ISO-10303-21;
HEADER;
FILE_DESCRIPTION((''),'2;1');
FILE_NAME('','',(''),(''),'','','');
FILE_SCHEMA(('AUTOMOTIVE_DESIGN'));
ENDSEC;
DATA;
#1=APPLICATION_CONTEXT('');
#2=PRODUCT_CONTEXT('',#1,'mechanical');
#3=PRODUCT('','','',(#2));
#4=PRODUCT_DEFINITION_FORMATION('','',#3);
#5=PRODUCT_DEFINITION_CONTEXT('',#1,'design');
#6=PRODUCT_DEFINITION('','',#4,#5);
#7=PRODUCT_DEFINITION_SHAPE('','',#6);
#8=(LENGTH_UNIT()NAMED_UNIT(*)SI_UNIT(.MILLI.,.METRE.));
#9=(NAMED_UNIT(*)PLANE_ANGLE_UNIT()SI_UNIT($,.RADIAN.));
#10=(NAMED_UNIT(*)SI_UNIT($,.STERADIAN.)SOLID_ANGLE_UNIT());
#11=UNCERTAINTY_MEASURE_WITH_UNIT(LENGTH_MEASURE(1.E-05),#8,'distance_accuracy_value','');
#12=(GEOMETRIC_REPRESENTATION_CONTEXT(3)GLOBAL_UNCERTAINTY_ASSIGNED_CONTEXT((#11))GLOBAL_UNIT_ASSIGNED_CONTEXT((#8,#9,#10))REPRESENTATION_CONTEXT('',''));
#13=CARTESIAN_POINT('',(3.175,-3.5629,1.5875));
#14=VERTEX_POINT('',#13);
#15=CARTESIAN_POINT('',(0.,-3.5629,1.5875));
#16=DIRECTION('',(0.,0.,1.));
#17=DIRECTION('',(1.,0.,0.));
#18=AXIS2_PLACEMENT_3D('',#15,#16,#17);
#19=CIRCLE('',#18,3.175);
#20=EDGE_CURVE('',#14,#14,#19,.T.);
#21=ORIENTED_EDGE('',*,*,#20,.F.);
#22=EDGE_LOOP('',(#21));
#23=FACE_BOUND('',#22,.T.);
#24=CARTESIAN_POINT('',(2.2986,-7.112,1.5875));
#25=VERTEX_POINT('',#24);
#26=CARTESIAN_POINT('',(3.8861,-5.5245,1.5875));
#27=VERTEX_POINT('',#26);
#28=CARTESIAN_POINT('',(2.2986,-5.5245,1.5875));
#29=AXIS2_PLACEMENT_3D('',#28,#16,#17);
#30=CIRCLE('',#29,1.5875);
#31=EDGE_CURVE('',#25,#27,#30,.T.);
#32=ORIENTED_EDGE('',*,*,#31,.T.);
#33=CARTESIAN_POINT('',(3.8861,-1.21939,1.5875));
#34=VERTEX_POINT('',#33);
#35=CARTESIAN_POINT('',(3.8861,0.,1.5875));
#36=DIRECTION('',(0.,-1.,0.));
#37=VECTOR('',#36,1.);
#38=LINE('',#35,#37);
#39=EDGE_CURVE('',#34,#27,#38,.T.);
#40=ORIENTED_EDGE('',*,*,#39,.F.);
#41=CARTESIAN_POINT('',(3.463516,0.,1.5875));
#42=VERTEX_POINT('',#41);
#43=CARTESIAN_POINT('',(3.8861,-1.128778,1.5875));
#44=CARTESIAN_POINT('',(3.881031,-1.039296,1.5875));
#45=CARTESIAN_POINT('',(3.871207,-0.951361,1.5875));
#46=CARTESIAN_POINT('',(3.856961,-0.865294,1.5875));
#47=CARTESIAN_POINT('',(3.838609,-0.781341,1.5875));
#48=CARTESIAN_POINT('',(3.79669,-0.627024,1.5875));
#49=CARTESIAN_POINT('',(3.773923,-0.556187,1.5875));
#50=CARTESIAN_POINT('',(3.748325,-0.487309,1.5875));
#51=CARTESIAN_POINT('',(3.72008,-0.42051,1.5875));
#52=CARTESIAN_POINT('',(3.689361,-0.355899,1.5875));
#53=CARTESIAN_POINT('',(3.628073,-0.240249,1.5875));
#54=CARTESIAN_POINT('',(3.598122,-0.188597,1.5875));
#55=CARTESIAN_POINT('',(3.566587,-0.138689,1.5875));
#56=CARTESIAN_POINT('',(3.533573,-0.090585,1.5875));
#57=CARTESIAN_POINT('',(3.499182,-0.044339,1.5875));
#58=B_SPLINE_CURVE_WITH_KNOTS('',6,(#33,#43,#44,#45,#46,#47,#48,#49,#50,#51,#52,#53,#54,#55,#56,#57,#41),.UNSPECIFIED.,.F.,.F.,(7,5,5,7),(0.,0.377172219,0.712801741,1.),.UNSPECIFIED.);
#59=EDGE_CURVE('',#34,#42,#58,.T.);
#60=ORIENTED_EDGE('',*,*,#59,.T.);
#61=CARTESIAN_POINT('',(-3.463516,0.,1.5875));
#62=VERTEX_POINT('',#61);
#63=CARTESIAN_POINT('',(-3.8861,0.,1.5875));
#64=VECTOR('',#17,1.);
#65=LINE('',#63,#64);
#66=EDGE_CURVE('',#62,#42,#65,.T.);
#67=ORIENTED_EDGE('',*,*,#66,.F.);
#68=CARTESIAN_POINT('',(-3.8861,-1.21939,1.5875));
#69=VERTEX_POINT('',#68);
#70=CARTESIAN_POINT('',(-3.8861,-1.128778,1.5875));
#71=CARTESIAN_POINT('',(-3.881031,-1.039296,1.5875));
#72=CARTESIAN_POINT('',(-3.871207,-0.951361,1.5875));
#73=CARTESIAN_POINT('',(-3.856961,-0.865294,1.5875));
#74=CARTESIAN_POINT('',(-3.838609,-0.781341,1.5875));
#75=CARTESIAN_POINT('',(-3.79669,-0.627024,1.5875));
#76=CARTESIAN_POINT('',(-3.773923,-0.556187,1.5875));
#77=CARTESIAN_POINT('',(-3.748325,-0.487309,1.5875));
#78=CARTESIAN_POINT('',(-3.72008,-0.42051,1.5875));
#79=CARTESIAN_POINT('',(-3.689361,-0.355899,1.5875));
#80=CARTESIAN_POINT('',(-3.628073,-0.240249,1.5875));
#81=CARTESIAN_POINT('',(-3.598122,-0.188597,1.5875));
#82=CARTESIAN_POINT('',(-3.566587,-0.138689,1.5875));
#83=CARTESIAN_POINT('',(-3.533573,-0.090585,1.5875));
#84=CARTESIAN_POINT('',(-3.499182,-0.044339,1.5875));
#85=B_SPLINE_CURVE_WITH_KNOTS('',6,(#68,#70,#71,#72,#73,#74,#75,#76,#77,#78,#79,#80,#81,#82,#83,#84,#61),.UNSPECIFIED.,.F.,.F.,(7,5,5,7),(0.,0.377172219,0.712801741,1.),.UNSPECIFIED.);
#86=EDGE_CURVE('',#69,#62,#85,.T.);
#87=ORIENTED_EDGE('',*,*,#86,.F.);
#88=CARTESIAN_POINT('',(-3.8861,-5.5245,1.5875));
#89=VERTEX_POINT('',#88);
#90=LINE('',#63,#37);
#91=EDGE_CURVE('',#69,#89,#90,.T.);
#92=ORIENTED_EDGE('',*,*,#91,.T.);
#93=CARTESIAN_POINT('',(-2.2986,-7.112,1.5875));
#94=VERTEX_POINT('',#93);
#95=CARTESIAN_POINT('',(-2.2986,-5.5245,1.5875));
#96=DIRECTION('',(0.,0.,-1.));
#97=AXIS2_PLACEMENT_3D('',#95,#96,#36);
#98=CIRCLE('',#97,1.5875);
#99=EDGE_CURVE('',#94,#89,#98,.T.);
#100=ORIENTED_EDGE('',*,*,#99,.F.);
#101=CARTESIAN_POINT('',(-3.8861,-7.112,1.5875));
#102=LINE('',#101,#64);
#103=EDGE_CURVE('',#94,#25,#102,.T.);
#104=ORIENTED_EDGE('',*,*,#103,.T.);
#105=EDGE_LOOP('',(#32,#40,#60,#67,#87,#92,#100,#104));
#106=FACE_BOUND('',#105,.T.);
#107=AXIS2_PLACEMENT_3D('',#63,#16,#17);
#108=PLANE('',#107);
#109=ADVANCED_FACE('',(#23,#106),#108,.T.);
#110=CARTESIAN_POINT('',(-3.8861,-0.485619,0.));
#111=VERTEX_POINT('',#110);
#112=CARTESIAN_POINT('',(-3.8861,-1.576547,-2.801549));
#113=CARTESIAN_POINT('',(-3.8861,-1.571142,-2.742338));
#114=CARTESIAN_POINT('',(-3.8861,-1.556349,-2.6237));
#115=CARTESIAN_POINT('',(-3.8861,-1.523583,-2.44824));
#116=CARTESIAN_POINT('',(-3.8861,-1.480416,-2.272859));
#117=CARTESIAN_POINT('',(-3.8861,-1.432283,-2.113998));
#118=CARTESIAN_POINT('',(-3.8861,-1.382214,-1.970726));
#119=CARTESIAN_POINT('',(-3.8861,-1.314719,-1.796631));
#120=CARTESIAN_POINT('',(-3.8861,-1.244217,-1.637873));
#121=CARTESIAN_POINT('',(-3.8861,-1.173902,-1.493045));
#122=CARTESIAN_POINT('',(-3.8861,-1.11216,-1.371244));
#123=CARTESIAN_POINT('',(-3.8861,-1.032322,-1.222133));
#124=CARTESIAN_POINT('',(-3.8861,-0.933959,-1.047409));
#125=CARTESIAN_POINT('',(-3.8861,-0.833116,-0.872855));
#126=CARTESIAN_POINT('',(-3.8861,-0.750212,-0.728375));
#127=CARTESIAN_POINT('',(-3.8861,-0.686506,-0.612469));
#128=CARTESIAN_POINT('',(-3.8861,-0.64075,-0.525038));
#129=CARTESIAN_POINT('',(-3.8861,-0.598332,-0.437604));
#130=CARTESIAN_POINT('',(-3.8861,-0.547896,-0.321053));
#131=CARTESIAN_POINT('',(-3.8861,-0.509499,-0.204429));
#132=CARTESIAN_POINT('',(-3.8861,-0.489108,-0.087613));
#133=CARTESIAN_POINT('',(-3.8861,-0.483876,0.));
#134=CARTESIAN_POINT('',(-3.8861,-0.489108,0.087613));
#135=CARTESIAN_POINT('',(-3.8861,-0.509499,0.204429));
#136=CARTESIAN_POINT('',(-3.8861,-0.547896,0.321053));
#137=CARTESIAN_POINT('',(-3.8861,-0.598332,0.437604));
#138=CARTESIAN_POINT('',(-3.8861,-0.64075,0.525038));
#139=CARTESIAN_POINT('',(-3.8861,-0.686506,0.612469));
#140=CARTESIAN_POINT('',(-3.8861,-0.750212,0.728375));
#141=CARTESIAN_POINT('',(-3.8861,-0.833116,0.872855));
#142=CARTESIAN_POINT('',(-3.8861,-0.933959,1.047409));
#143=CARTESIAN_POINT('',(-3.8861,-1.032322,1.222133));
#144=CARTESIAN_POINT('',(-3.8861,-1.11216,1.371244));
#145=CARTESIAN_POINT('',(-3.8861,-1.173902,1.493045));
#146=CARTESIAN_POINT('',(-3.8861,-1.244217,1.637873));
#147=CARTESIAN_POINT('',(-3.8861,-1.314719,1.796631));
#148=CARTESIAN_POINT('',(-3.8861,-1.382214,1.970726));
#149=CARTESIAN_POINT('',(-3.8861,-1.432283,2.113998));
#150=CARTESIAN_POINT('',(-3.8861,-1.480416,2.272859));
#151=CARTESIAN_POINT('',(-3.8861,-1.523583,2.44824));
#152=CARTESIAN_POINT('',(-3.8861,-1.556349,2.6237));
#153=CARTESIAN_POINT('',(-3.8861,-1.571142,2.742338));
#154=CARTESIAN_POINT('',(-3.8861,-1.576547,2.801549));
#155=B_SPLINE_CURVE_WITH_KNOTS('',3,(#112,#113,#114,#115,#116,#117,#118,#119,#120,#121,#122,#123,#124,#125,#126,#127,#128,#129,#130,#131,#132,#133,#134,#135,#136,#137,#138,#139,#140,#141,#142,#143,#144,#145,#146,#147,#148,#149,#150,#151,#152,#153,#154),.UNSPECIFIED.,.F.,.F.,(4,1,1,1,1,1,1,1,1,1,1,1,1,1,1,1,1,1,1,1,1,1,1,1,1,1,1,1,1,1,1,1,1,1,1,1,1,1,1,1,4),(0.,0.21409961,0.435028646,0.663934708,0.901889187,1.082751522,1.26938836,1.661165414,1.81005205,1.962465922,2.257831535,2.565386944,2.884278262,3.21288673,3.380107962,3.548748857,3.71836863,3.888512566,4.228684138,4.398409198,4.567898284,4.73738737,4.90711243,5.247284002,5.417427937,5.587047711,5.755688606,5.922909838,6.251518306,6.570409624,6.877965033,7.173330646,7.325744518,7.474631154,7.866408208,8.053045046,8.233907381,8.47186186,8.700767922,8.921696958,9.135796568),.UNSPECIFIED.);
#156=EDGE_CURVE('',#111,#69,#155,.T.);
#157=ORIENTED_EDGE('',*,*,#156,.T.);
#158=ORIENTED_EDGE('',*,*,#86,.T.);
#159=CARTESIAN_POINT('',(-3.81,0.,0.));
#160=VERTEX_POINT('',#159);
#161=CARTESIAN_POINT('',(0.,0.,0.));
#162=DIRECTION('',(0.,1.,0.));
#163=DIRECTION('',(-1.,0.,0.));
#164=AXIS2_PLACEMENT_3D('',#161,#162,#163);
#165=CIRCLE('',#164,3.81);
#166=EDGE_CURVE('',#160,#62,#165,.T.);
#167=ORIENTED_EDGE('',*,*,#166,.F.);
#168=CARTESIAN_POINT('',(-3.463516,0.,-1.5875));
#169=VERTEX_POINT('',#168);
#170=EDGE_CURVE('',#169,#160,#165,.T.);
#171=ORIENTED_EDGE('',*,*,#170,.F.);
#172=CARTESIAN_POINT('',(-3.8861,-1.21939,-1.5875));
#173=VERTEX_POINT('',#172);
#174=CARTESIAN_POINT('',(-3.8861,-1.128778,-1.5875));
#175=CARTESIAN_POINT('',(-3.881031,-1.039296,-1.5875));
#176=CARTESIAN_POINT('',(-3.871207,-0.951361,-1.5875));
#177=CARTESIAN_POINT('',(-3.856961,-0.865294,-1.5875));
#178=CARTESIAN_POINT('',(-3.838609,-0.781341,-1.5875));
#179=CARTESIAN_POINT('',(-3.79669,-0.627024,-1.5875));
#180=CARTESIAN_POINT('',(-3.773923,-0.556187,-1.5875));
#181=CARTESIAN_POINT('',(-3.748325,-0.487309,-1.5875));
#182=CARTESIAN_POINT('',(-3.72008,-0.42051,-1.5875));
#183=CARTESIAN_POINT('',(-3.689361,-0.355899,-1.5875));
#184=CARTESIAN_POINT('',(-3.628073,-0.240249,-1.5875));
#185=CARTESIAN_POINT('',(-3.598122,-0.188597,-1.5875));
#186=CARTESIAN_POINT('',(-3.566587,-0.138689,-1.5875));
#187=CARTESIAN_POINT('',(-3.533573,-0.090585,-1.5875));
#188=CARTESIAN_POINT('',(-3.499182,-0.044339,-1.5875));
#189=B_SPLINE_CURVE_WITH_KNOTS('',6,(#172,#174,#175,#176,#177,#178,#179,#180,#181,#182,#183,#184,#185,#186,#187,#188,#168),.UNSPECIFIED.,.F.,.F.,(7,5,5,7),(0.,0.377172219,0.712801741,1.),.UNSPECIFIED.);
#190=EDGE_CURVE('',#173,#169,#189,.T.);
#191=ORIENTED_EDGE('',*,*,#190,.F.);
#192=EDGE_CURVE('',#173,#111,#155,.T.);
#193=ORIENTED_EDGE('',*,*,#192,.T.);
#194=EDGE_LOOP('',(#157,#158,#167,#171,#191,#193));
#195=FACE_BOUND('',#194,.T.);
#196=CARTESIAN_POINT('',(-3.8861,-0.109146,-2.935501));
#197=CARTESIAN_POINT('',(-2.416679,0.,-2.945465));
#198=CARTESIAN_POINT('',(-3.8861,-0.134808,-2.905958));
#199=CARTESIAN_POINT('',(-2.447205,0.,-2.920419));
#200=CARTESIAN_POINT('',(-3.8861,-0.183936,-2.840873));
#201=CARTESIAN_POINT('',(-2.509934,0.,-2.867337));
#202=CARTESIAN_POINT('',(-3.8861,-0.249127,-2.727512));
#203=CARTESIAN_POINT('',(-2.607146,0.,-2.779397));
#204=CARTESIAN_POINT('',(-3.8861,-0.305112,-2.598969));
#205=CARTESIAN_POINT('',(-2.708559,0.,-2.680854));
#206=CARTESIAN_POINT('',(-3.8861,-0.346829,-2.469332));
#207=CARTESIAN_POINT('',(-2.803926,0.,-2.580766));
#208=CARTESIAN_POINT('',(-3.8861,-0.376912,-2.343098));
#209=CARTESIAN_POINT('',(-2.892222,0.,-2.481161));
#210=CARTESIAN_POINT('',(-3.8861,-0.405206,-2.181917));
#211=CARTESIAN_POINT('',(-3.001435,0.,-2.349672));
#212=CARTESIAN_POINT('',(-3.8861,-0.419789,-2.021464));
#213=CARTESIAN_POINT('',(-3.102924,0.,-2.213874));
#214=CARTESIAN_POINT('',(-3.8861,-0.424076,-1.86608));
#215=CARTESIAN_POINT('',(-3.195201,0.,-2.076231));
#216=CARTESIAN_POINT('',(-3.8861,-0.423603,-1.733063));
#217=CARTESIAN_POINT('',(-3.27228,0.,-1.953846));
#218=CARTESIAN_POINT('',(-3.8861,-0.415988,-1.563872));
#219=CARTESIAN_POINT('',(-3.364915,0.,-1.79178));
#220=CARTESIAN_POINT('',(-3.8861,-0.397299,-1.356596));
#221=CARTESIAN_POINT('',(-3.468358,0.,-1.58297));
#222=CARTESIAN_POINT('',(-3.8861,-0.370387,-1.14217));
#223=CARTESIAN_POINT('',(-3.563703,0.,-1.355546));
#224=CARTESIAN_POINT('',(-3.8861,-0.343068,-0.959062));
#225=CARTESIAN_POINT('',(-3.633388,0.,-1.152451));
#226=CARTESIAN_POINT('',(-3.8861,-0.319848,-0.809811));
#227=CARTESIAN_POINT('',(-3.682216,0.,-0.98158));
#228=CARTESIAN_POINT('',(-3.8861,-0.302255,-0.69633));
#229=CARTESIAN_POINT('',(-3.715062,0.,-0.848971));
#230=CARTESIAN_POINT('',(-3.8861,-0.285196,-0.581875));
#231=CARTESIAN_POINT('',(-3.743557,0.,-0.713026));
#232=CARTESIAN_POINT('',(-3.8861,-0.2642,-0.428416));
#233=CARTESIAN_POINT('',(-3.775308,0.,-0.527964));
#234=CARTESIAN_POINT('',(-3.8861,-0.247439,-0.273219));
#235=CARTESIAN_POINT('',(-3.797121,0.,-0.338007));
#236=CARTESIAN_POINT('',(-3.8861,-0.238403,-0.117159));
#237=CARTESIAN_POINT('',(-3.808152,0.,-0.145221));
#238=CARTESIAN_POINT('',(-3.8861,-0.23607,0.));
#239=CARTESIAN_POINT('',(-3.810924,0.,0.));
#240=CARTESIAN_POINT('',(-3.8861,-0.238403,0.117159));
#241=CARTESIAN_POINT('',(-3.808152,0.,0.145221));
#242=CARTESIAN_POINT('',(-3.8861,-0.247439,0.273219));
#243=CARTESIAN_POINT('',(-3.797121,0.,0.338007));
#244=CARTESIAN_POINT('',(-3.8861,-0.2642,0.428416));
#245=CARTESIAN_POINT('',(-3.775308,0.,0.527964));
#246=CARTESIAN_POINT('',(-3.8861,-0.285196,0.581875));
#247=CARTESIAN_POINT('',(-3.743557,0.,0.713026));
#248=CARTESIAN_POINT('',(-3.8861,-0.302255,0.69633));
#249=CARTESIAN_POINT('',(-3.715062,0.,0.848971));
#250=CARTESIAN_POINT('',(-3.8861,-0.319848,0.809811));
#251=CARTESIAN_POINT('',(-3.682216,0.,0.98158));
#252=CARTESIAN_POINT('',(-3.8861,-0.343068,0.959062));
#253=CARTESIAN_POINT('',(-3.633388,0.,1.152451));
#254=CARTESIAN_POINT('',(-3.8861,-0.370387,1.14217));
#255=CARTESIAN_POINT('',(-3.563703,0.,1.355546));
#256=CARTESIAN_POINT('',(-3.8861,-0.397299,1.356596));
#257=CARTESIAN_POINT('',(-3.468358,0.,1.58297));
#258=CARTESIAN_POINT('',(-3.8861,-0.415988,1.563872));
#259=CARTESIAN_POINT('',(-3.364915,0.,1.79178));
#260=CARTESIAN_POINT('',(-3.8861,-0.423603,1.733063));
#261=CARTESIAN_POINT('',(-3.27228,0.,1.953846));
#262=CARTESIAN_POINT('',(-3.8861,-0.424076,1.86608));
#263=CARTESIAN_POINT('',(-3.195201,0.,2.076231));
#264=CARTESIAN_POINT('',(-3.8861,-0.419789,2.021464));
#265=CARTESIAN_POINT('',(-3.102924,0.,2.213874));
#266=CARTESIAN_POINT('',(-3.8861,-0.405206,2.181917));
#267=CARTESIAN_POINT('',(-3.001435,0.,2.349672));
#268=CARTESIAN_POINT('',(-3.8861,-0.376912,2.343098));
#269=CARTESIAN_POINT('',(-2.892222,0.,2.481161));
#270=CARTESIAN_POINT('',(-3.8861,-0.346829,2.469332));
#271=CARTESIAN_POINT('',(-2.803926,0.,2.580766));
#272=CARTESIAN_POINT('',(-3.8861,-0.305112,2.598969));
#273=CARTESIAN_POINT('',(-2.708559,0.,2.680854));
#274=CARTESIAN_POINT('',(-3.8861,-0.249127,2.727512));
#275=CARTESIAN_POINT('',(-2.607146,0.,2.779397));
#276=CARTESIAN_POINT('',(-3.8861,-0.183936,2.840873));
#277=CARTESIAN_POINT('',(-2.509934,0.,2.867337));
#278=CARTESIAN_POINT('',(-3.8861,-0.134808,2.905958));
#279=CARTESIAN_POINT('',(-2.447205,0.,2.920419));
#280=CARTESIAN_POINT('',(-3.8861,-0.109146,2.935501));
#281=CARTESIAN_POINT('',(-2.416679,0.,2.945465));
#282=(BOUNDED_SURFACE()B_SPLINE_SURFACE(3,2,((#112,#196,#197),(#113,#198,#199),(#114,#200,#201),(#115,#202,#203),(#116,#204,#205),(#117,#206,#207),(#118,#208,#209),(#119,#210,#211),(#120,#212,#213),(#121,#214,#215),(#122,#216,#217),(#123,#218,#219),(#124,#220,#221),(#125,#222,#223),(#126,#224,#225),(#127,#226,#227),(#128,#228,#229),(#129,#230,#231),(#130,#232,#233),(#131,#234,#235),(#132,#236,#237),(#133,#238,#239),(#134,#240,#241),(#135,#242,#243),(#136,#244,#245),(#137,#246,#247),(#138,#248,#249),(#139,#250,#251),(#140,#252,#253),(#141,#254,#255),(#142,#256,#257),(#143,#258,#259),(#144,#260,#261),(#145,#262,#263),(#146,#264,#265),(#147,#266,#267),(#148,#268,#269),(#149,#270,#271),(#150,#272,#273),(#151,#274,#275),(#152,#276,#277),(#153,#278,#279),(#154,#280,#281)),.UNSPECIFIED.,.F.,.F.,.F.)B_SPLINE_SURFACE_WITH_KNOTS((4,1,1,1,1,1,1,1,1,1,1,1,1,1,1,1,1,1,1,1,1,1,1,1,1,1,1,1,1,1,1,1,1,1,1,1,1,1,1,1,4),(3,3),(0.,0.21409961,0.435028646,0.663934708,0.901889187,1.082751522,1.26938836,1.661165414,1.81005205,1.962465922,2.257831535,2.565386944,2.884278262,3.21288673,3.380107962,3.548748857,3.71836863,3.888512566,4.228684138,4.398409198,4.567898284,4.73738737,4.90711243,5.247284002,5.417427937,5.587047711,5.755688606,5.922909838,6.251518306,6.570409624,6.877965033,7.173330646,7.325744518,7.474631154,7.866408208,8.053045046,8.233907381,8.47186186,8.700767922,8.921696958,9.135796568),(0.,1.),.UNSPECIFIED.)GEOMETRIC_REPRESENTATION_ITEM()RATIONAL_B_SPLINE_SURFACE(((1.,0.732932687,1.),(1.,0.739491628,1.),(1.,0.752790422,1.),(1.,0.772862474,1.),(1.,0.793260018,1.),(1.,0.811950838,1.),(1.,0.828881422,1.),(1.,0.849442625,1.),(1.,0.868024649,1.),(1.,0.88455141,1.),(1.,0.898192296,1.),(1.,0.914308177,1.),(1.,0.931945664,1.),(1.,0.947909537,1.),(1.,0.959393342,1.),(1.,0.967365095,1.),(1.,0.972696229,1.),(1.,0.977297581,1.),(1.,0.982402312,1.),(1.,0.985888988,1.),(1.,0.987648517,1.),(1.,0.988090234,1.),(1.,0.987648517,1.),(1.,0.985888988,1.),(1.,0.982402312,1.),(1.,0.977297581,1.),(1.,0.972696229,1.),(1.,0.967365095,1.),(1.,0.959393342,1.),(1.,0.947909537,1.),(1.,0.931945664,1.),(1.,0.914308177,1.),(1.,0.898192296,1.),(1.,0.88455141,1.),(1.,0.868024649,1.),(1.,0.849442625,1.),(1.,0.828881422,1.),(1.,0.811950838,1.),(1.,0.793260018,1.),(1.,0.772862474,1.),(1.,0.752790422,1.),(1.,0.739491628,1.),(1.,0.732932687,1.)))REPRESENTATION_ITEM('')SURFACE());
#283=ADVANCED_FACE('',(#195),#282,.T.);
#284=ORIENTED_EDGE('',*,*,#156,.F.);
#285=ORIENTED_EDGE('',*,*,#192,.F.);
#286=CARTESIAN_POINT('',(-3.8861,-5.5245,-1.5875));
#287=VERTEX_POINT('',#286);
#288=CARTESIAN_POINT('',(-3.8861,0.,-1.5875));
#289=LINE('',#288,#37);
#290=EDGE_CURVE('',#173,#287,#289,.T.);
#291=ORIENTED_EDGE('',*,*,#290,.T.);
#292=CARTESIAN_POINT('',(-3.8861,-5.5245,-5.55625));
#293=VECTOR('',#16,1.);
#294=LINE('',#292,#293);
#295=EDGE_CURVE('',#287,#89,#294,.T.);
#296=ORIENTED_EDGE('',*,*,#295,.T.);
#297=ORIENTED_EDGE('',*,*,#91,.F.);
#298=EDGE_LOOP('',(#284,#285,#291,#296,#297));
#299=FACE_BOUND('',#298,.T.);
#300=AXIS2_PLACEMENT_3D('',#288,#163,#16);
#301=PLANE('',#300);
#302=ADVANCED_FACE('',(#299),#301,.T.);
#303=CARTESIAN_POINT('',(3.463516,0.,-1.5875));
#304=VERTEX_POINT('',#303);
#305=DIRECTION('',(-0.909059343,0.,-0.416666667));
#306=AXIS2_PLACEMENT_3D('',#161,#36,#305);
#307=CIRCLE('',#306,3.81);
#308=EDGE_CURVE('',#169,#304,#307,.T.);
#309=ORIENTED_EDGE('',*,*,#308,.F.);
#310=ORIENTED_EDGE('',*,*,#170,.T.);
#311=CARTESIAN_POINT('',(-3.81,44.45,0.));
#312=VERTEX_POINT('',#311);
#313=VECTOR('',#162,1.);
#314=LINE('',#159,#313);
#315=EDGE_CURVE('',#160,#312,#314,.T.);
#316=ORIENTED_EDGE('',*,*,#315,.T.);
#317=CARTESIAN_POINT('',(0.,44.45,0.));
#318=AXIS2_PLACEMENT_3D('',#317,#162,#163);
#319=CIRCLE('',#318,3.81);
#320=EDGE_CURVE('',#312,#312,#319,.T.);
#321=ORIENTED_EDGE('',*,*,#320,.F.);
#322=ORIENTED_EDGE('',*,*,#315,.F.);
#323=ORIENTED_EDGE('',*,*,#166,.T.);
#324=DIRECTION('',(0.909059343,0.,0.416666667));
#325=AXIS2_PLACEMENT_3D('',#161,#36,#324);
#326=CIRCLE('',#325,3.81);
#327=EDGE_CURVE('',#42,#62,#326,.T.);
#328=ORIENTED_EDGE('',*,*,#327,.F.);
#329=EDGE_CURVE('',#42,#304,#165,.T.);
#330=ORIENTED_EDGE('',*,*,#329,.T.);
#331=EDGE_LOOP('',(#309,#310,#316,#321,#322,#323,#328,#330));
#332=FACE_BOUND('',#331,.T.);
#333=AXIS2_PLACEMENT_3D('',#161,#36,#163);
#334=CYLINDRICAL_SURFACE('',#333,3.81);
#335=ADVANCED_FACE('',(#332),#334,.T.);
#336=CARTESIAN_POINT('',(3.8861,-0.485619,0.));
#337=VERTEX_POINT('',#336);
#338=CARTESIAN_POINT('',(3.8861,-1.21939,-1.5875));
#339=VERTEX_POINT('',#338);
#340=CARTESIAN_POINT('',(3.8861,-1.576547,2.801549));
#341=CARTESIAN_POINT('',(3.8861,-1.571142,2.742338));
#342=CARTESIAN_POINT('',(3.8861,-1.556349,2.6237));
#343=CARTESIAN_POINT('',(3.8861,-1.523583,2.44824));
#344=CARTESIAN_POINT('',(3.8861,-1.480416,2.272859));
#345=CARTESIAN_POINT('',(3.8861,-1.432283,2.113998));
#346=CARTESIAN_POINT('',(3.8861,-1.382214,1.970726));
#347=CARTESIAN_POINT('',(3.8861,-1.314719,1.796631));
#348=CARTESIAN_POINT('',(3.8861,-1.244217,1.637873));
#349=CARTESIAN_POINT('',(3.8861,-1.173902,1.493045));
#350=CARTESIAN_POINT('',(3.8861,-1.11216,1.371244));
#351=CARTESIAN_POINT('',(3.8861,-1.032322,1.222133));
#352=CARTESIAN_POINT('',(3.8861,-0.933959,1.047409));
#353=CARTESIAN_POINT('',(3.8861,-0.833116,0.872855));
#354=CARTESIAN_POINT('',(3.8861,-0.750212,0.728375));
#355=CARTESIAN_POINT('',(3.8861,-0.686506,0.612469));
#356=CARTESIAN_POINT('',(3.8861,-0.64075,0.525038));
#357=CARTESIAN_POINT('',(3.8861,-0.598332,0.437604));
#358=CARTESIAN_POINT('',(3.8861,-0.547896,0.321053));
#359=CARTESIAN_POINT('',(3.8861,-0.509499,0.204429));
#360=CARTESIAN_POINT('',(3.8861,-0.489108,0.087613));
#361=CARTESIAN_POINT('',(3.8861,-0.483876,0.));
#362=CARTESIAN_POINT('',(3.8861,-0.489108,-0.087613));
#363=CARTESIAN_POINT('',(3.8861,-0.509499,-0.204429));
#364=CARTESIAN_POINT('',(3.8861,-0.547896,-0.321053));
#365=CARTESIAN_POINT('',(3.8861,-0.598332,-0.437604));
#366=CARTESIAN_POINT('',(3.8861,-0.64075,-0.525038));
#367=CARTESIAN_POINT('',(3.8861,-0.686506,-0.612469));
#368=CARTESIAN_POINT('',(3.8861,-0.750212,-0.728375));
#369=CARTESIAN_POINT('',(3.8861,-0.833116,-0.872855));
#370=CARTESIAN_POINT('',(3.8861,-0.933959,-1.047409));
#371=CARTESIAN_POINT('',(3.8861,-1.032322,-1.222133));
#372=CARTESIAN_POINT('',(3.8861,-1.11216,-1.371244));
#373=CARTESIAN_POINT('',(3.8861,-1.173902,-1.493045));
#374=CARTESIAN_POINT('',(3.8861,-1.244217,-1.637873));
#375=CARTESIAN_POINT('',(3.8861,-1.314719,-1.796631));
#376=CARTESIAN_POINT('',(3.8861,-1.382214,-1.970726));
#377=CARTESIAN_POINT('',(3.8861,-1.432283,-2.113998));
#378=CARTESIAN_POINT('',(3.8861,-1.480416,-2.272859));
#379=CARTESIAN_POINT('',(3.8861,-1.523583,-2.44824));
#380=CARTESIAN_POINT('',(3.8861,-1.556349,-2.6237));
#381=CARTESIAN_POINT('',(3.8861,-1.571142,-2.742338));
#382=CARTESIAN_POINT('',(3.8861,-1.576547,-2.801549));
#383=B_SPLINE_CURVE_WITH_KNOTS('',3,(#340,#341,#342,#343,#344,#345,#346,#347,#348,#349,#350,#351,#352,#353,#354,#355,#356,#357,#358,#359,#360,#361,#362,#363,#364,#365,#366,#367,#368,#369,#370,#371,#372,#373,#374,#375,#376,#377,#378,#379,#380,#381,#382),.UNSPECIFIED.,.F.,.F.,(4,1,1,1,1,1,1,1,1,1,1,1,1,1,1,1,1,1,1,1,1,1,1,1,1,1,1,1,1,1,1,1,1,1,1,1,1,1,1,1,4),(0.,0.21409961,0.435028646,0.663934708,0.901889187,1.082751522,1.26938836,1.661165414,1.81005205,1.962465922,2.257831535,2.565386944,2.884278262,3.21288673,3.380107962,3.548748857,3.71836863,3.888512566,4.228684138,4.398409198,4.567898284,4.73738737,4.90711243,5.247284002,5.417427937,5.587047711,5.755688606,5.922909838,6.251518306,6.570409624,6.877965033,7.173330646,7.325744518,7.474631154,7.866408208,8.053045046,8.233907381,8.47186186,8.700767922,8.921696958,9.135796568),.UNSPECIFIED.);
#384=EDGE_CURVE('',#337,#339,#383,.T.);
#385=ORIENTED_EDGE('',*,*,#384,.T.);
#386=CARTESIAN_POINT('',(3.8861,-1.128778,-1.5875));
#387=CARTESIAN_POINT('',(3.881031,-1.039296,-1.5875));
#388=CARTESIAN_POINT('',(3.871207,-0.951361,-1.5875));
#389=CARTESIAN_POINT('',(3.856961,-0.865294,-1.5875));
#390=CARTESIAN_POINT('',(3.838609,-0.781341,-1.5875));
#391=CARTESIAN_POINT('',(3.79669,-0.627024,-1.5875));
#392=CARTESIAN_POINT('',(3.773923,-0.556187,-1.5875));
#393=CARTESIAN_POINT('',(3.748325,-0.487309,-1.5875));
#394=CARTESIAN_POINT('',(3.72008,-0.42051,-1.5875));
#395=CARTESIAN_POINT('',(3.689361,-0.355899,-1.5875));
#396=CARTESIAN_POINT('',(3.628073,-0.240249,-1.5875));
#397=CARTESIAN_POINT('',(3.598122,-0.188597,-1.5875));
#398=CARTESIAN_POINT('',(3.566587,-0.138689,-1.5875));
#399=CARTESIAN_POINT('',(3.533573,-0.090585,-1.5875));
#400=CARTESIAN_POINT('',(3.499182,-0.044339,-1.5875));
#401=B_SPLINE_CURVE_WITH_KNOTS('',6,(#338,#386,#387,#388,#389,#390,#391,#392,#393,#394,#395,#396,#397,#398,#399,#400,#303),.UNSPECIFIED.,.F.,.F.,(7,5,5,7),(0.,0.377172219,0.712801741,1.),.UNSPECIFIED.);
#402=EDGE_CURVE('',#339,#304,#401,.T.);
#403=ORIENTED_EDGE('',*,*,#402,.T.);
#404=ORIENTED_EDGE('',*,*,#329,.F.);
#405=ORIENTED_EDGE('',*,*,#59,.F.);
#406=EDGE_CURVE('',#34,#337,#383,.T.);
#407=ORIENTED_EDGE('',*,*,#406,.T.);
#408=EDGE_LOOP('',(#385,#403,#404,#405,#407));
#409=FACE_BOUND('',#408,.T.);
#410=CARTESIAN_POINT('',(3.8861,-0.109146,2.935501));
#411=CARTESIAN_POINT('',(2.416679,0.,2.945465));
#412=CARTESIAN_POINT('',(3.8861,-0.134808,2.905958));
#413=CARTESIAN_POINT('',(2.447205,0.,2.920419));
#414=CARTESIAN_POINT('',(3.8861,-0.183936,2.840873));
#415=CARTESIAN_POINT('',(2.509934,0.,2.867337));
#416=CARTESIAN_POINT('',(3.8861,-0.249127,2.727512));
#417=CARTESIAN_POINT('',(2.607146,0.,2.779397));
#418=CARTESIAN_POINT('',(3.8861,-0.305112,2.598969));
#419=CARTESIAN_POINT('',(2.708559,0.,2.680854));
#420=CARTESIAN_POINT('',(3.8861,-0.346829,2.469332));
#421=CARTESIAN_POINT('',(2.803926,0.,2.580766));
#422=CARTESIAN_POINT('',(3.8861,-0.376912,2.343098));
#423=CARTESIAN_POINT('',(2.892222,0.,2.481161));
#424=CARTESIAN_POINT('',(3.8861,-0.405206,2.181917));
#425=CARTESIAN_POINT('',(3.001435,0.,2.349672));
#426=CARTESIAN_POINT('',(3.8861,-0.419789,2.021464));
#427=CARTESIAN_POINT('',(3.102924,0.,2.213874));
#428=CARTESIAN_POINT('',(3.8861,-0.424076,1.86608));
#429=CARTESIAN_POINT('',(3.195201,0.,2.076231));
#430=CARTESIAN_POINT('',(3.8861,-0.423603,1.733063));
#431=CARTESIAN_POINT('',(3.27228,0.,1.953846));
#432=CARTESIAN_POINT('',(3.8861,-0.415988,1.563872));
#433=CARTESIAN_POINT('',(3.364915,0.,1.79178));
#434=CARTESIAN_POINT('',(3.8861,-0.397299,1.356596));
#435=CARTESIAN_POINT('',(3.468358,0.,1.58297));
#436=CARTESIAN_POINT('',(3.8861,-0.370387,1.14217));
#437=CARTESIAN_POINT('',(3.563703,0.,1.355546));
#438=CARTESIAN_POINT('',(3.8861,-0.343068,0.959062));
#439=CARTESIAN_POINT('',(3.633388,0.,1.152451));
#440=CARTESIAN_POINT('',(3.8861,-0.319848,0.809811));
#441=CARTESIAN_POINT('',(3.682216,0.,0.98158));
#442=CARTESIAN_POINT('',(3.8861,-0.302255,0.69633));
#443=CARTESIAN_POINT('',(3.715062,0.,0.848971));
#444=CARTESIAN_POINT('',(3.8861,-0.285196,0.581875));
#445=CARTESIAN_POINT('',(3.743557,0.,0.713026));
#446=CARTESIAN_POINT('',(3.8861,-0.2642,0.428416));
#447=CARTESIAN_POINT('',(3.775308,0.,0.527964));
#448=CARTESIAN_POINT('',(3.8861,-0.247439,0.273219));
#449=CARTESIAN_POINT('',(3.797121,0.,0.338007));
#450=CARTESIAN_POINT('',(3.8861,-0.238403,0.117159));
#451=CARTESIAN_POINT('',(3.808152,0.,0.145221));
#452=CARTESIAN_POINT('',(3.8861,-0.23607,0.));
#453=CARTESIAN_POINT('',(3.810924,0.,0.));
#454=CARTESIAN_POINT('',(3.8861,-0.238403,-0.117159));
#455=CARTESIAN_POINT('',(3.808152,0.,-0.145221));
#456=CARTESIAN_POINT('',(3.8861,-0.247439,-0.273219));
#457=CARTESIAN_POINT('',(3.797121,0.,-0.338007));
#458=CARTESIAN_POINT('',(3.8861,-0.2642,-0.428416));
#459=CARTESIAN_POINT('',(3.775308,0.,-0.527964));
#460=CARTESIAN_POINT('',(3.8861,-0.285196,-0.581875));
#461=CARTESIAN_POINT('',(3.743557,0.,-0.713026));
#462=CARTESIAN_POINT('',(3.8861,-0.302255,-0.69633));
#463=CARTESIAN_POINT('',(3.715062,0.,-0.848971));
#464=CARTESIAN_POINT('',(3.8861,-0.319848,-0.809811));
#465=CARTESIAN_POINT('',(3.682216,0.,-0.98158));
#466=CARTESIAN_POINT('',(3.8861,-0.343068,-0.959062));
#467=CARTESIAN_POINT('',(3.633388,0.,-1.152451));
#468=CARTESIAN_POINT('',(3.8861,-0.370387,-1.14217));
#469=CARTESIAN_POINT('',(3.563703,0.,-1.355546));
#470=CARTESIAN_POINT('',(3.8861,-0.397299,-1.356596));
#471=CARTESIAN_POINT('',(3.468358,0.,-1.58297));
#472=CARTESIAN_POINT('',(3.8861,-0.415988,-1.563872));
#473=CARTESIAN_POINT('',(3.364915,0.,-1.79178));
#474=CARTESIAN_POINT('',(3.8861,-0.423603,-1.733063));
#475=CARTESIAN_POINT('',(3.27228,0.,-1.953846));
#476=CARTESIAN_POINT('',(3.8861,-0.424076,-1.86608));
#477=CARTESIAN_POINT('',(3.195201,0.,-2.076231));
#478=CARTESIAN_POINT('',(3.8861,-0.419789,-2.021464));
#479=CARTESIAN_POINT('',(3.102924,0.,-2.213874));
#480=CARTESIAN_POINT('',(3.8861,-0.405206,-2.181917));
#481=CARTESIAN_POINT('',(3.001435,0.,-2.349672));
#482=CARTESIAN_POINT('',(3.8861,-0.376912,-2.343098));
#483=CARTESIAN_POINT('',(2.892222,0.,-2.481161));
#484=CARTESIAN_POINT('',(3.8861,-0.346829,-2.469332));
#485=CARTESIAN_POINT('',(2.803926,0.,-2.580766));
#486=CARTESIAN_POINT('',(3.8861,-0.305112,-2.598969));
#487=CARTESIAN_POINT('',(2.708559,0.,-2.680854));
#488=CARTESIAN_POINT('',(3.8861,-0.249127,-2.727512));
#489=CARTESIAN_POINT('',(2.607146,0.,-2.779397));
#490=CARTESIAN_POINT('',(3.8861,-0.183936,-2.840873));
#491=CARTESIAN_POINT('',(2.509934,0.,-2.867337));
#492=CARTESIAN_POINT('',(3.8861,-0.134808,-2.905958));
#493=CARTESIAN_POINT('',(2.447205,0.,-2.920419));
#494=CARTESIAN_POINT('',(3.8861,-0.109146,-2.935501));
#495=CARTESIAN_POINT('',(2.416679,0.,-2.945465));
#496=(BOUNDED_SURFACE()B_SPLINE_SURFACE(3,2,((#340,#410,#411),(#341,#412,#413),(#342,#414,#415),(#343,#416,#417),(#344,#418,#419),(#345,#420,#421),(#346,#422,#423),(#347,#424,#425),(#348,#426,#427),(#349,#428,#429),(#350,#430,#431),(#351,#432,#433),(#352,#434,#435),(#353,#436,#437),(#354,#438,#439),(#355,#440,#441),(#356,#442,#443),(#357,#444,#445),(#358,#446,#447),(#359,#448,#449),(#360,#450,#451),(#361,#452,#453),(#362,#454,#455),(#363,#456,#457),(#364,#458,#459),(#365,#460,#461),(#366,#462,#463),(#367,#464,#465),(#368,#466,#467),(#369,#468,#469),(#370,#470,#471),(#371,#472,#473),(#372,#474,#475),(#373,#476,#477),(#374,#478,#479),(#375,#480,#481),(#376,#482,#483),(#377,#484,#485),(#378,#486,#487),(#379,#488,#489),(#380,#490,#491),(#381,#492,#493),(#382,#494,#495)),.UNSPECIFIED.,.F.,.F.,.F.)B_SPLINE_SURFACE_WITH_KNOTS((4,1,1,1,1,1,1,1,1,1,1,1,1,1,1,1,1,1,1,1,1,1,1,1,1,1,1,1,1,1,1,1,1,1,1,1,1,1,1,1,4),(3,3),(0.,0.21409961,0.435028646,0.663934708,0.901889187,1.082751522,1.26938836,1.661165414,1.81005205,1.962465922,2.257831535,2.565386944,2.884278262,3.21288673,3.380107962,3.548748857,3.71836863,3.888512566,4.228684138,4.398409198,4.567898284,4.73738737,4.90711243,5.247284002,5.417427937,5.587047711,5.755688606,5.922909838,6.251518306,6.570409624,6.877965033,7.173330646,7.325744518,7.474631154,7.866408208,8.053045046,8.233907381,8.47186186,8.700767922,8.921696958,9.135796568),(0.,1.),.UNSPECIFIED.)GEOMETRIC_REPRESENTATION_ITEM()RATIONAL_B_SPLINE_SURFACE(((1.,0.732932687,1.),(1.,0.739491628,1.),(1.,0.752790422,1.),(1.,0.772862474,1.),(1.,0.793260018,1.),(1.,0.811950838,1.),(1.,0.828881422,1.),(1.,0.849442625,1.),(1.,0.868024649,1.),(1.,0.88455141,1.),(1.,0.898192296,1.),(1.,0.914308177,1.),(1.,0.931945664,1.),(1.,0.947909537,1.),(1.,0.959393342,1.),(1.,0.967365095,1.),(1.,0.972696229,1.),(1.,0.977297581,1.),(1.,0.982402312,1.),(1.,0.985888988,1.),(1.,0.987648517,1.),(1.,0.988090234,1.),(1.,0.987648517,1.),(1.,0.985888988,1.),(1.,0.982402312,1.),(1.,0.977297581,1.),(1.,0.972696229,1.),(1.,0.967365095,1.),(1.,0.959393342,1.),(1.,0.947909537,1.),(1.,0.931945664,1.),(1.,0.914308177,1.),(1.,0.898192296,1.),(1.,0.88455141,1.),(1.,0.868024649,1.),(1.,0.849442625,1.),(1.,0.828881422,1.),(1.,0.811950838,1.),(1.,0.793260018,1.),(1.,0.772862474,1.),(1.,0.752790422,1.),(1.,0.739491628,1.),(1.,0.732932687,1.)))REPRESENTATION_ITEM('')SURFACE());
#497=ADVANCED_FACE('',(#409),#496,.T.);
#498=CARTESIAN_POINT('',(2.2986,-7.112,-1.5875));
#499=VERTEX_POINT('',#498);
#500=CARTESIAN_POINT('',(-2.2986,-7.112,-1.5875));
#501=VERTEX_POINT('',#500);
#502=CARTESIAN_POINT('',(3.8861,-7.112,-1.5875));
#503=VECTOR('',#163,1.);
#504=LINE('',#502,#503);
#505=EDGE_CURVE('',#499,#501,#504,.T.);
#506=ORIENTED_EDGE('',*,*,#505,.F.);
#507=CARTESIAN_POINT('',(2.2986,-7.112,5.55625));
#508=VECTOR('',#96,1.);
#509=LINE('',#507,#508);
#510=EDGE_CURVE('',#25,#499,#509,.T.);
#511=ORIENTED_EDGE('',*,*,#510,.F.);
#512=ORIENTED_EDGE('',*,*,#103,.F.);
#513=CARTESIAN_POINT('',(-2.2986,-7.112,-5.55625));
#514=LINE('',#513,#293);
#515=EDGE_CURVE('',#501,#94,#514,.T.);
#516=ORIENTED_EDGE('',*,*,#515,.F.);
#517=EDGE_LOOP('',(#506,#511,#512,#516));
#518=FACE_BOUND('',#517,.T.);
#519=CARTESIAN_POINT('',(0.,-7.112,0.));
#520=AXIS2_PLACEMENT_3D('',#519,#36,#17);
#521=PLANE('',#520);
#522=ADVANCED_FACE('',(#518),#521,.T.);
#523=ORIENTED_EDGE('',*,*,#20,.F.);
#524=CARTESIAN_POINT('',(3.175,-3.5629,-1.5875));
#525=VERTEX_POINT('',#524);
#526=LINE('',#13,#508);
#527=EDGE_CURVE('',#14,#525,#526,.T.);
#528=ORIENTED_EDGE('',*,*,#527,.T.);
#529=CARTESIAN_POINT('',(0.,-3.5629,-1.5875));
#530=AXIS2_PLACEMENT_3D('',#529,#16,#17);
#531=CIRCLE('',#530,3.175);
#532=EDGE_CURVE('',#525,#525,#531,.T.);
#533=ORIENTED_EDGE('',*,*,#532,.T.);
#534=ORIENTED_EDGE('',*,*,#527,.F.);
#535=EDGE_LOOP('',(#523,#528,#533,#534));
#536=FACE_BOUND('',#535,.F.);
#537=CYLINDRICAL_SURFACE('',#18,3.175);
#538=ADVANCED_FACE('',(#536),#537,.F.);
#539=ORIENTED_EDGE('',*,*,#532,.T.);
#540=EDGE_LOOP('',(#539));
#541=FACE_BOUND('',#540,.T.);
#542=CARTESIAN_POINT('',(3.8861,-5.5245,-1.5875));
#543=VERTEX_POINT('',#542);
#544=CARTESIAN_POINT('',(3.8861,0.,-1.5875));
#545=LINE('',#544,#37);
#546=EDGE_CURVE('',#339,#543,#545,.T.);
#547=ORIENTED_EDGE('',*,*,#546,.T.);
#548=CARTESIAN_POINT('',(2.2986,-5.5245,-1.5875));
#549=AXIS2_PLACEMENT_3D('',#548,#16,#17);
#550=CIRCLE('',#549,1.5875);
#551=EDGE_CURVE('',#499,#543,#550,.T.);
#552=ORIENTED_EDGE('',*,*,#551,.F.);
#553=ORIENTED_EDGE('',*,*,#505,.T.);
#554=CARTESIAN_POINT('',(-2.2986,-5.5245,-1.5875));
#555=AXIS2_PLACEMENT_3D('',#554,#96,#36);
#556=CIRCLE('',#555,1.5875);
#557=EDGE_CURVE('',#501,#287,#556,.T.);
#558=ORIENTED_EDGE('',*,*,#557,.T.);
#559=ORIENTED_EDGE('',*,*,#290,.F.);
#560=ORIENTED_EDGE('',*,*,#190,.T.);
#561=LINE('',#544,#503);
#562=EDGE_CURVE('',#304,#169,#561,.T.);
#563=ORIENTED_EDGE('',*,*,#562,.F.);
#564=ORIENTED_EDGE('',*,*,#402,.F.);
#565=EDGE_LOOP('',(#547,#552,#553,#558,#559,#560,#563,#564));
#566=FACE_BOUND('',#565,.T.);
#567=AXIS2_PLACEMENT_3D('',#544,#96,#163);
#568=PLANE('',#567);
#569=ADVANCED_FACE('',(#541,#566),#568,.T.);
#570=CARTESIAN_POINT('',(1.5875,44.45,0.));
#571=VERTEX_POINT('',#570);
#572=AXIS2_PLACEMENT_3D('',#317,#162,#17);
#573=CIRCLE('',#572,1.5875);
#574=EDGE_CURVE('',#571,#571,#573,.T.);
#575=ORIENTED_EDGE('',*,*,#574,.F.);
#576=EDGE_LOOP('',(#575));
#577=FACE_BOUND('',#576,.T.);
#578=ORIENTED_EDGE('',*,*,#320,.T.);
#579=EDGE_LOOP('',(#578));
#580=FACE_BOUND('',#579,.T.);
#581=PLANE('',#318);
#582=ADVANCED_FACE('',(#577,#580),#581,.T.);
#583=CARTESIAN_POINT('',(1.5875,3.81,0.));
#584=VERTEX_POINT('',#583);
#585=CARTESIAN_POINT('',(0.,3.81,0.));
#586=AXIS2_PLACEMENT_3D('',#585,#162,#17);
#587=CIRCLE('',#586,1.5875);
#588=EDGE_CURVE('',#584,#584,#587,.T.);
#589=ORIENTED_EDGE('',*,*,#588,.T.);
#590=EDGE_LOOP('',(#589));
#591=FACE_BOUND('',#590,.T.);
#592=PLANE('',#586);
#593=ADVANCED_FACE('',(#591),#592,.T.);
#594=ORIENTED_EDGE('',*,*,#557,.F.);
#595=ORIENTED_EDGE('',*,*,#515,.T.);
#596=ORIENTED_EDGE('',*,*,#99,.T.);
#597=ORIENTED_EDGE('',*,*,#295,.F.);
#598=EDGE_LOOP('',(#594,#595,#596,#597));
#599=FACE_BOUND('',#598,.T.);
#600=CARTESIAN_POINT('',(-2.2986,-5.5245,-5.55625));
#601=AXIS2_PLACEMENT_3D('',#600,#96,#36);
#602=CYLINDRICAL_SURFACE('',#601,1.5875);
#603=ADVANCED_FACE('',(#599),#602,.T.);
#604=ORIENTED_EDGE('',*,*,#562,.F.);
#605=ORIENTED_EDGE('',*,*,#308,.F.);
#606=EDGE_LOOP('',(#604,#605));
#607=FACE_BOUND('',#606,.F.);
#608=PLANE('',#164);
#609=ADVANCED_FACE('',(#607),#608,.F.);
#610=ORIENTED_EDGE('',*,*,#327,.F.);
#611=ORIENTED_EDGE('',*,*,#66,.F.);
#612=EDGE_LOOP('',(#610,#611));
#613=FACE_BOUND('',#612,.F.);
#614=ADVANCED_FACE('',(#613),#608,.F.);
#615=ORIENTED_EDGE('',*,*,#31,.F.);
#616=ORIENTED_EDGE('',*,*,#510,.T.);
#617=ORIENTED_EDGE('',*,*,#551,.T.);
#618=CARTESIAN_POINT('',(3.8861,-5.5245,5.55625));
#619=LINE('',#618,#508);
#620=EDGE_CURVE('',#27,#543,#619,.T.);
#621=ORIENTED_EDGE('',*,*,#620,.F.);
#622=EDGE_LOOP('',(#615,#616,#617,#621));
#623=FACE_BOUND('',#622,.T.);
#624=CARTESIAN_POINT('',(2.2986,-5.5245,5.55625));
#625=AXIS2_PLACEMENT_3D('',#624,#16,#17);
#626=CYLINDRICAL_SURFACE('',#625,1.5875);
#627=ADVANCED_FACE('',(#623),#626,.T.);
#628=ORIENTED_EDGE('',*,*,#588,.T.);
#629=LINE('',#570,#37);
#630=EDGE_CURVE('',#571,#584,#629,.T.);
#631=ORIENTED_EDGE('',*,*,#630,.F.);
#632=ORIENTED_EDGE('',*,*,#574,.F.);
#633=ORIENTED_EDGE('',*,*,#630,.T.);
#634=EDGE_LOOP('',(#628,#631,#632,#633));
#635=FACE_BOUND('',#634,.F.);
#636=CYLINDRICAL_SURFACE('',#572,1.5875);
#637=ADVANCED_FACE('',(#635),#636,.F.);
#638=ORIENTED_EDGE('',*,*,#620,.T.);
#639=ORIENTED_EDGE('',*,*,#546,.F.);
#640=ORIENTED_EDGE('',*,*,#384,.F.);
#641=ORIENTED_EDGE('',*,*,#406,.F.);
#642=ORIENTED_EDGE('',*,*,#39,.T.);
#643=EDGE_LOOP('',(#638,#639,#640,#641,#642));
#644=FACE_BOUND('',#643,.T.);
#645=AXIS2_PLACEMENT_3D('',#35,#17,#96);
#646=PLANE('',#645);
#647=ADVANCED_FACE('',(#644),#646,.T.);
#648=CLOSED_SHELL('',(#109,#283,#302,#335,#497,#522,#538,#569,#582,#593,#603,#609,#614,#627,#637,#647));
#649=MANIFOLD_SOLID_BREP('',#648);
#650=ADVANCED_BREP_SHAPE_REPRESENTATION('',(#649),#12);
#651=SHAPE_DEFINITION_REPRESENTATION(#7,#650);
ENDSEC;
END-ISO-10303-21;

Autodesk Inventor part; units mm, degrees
ref_plane "YZ Plane" through (0, 0, 0) normal (1, 0, 0) x (0, 1, 0)
ref_plane "XZ Plane" through (0, 0, 0) normal (0, 1, 0) x (-1, 0, 0)
ref_plane "XY Plane" through (0, 0, 0) normal (0, 0, 1) x (1, 0, 0)
sketch "Sketch1" plane through (0, 0, 0) normal (0, 1, 0) x (-1, 0, 0)
  circle A0 centre (0, 0) radius 3.81
  dimension "d0" = 7.62
extrude "Extrusion1" add sketch "Sketch1" along normal blind 44.45
sketch "Sketch2" plane through (0, 44.45, 0) normal (0, 1, 0) x (1, 0, 0)
  circle A0 centre (0, 0) radius 1.5875
  dimension "d3" = 3.175
extrude "Extrusion2" cut sketch "Sketch2" against normal blind 40.64
sketch "Sketch3" plane through (0, 0, 0) normal (0, -1, 0) x (1, 0, 0)
  line L0 (3.8861, -1.5875) -> (-3.8861, -1.5875)
  line L1 (-3.8861, -1.5875) -> (-3.8861, 1.5875)
  line L2 (-3.8861, 1.5875) -> (3.8861, 1.5875)
  line L3 (3.8861, 1.5875) -> (3.8861, -1.5875)
  line L4 (3.8861, -1.5875) -> (-3.8861, 1.5875) construction
  line L5 (-3.8861, -1.5875) -> (3.8861, 1.5875) construction
  point P0 (0, 0)
extrude "Extrusion3" add sketch "Sketch3" along normal blind 7.112
sketch "Sketch5" plane through (-3.8861, 0, 1.5875) normal (0, 0, 1) x (1, 0, 0)
  circle A0 centre (3.8861, -3.5629) radius 3.175
  point P0 (3.8861, 0)
  dimension "d16" = 6.35
extrude "Extrusion4" cut sketch "Sketch5" against normal blind 6.35
fillet "Fillet2" radius 1.5875 4 edges at (3.8861, 0, 0) (3.8861, -7.112, 0) (-3.8861, 0, 0) (-3.8861, -7.112, 0)
properties part number "cylendar2"
